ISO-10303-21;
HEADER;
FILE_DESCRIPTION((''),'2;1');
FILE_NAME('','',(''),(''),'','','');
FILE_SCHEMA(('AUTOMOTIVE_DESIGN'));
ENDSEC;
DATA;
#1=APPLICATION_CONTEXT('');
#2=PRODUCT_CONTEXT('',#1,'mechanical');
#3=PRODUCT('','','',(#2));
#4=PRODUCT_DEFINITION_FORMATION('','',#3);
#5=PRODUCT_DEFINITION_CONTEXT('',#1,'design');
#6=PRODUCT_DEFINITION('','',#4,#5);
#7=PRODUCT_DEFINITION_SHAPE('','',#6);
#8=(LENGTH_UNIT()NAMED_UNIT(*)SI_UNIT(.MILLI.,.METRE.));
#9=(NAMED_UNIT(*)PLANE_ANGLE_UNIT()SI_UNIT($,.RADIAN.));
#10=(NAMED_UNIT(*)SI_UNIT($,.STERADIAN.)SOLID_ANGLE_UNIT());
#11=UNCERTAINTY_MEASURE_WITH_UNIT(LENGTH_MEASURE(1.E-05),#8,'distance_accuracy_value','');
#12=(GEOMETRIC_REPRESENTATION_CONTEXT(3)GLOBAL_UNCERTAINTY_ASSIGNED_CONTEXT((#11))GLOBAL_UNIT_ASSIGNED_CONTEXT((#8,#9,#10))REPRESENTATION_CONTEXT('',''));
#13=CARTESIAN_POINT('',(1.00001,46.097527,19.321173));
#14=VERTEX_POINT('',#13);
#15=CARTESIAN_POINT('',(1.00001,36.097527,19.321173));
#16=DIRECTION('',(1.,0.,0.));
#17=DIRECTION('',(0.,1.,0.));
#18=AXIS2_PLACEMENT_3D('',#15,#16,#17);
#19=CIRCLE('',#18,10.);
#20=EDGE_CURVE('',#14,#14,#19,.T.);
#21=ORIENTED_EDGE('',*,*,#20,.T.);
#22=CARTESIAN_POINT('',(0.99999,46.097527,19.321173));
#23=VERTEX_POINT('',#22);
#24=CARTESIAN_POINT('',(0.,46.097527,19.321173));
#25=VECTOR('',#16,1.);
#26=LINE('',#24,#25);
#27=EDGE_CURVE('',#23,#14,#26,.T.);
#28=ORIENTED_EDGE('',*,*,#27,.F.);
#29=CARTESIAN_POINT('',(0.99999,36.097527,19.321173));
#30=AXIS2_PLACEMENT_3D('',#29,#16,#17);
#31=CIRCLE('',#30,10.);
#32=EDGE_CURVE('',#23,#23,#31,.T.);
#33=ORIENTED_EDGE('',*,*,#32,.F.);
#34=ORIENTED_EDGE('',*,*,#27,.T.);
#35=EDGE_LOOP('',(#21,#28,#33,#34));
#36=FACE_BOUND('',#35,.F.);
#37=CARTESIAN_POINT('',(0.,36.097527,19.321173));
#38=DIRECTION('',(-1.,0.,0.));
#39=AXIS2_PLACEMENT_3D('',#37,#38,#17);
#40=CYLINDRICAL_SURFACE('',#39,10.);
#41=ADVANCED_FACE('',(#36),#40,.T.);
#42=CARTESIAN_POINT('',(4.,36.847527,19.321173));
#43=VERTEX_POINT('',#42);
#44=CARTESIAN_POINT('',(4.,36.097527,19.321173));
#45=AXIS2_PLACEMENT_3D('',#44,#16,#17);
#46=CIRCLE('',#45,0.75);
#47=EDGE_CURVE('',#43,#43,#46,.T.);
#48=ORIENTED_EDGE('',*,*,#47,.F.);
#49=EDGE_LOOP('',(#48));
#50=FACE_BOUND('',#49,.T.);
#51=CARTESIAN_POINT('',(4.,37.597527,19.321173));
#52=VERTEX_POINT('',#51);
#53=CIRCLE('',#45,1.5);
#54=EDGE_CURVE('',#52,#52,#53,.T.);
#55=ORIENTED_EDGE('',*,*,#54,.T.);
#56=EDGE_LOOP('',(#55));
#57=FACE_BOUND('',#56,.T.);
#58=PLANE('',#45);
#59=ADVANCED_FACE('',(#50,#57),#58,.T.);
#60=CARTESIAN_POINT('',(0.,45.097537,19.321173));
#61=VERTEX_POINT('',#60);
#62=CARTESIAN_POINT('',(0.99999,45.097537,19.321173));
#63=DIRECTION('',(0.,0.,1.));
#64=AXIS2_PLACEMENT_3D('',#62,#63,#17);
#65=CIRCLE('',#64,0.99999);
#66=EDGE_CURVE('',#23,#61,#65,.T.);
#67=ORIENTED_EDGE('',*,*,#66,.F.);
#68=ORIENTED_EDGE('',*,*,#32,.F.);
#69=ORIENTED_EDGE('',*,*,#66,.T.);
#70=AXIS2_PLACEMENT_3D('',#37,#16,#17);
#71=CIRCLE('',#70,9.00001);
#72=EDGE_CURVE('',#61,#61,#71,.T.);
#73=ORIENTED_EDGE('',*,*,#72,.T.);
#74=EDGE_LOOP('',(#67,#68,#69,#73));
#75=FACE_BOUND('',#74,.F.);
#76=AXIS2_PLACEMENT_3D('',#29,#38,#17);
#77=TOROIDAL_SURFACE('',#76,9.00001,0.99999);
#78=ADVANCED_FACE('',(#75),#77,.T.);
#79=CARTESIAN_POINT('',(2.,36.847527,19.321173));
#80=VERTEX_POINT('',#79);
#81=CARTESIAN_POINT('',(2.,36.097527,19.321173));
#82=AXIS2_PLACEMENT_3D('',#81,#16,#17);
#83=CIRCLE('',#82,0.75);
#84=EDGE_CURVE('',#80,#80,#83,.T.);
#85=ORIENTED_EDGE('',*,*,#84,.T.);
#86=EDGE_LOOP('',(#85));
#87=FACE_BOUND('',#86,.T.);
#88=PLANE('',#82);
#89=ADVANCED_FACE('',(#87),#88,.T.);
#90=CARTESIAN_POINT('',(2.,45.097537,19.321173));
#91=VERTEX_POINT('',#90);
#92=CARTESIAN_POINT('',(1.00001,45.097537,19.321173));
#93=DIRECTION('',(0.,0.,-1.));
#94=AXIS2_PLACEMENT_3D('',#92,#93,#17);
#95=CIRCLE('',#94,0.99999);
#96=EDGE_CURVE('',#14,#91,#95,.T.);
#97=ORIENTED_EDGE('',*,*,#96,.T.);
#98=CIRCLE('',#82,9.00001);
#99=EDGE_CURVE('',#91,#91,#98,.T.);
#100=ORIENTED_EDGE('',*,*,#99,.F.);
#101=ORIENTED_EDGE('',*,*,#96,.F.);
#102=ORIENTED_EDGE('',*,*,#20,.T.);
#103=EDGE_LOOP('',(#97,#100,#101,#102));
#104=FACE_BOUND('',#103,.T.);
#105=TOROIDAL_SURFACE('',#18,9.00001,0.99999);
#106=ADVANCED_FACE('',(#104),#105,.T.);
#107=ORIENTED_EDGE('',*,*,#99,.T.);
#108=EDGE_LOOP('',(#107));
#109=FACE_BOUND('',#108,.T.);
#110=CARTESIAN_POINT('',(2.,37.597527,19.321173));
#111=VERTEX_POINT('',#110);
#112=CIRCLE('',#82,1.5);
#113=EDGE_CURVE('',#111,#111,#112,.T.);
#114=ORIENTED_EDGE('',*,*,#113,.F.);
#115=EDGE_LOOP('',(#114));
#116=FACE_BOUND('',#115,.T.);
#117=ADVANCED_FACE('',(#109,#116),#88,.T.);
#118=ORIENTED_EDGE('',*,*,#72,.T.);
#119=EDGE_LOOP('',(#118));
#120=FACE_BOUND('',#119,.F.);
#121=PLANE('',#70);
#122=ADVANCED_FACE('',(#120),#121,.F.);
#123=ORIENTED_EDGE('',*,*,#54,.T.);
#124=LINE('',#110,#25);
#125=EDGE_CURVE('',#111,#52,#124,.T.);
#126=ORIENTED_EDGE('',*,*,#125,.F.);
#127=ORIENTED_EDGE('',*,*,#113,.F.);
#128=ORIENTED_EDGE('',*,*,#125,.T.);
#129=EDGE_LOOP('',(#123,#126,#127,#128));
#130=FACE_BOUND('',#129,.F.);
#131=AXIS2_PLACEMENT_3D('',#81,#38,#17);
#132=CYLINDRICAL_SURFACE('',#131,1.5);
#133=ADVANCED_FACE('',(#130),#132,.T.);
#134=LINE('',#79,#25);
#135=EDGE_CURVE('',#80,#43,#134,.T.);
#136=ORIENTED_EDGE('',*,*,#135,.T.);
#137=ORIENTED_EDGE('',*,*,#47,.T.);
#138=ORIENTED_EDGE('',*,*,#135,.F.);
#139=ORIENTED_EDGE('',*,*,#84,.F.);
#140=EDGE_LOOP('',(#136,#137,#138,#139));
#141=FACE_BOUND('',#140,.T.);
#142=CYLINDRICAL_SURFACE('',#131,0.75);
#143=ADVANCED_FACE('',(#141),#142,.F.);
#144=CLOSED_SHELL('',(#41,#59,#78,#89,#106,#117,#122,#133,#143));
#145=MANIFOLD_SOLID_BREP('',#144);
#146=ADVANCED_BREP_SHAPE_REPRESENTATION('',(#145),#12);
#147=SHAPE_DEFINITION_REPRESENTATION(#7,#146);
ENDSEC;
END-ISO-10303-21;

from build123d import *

# Parameters (mm, degrees)
F0_R     = 10
F1_DEPTH = 2
F2_R     = 1.5
F2_R_2   = 0.75
F3_DEPTH = 2
F4_R     = 0.99999


# Not quite as in the source:
# - a fillet or chamfer is up to 0.001 mm smaller than in the source, because OpenCascade refuses the exact size


with BuildPart() as f1:
    # F0 (on Right) → F1 (new body)
    with BuildSketch(Plane.YZ):
        with Locations((36.0975265503, 19.3211734295)):
            Circle(F0_R)
    extrude(amount=F1_DEPTH)

    # F2 (on face) → F3 (join)
    with BuildSketch(Plane.YZ.offset(2)):
        with Locations((36.0975265503, 19.3211734295)):
            Circle(F2_R)
        with Locations((36.0975265503, 19.3211734295)):
            Circle(F2_R_2, mode=Mode.SUBTRACT)
    extrude(amount=F3_DEPTH)

    # F4 (radius 1 in the source; OpenCascade refuses exactly that, so slightly less here)
    f4_edges = [f1.edges().sort_by_distance(p)[0] for p in [
        (2, 26.097527, 19.321173),
        (0, 26.097527, 19.321173),
    ]]
    fillet(f4_edges, radius=F4_R)


solid = f1.part
